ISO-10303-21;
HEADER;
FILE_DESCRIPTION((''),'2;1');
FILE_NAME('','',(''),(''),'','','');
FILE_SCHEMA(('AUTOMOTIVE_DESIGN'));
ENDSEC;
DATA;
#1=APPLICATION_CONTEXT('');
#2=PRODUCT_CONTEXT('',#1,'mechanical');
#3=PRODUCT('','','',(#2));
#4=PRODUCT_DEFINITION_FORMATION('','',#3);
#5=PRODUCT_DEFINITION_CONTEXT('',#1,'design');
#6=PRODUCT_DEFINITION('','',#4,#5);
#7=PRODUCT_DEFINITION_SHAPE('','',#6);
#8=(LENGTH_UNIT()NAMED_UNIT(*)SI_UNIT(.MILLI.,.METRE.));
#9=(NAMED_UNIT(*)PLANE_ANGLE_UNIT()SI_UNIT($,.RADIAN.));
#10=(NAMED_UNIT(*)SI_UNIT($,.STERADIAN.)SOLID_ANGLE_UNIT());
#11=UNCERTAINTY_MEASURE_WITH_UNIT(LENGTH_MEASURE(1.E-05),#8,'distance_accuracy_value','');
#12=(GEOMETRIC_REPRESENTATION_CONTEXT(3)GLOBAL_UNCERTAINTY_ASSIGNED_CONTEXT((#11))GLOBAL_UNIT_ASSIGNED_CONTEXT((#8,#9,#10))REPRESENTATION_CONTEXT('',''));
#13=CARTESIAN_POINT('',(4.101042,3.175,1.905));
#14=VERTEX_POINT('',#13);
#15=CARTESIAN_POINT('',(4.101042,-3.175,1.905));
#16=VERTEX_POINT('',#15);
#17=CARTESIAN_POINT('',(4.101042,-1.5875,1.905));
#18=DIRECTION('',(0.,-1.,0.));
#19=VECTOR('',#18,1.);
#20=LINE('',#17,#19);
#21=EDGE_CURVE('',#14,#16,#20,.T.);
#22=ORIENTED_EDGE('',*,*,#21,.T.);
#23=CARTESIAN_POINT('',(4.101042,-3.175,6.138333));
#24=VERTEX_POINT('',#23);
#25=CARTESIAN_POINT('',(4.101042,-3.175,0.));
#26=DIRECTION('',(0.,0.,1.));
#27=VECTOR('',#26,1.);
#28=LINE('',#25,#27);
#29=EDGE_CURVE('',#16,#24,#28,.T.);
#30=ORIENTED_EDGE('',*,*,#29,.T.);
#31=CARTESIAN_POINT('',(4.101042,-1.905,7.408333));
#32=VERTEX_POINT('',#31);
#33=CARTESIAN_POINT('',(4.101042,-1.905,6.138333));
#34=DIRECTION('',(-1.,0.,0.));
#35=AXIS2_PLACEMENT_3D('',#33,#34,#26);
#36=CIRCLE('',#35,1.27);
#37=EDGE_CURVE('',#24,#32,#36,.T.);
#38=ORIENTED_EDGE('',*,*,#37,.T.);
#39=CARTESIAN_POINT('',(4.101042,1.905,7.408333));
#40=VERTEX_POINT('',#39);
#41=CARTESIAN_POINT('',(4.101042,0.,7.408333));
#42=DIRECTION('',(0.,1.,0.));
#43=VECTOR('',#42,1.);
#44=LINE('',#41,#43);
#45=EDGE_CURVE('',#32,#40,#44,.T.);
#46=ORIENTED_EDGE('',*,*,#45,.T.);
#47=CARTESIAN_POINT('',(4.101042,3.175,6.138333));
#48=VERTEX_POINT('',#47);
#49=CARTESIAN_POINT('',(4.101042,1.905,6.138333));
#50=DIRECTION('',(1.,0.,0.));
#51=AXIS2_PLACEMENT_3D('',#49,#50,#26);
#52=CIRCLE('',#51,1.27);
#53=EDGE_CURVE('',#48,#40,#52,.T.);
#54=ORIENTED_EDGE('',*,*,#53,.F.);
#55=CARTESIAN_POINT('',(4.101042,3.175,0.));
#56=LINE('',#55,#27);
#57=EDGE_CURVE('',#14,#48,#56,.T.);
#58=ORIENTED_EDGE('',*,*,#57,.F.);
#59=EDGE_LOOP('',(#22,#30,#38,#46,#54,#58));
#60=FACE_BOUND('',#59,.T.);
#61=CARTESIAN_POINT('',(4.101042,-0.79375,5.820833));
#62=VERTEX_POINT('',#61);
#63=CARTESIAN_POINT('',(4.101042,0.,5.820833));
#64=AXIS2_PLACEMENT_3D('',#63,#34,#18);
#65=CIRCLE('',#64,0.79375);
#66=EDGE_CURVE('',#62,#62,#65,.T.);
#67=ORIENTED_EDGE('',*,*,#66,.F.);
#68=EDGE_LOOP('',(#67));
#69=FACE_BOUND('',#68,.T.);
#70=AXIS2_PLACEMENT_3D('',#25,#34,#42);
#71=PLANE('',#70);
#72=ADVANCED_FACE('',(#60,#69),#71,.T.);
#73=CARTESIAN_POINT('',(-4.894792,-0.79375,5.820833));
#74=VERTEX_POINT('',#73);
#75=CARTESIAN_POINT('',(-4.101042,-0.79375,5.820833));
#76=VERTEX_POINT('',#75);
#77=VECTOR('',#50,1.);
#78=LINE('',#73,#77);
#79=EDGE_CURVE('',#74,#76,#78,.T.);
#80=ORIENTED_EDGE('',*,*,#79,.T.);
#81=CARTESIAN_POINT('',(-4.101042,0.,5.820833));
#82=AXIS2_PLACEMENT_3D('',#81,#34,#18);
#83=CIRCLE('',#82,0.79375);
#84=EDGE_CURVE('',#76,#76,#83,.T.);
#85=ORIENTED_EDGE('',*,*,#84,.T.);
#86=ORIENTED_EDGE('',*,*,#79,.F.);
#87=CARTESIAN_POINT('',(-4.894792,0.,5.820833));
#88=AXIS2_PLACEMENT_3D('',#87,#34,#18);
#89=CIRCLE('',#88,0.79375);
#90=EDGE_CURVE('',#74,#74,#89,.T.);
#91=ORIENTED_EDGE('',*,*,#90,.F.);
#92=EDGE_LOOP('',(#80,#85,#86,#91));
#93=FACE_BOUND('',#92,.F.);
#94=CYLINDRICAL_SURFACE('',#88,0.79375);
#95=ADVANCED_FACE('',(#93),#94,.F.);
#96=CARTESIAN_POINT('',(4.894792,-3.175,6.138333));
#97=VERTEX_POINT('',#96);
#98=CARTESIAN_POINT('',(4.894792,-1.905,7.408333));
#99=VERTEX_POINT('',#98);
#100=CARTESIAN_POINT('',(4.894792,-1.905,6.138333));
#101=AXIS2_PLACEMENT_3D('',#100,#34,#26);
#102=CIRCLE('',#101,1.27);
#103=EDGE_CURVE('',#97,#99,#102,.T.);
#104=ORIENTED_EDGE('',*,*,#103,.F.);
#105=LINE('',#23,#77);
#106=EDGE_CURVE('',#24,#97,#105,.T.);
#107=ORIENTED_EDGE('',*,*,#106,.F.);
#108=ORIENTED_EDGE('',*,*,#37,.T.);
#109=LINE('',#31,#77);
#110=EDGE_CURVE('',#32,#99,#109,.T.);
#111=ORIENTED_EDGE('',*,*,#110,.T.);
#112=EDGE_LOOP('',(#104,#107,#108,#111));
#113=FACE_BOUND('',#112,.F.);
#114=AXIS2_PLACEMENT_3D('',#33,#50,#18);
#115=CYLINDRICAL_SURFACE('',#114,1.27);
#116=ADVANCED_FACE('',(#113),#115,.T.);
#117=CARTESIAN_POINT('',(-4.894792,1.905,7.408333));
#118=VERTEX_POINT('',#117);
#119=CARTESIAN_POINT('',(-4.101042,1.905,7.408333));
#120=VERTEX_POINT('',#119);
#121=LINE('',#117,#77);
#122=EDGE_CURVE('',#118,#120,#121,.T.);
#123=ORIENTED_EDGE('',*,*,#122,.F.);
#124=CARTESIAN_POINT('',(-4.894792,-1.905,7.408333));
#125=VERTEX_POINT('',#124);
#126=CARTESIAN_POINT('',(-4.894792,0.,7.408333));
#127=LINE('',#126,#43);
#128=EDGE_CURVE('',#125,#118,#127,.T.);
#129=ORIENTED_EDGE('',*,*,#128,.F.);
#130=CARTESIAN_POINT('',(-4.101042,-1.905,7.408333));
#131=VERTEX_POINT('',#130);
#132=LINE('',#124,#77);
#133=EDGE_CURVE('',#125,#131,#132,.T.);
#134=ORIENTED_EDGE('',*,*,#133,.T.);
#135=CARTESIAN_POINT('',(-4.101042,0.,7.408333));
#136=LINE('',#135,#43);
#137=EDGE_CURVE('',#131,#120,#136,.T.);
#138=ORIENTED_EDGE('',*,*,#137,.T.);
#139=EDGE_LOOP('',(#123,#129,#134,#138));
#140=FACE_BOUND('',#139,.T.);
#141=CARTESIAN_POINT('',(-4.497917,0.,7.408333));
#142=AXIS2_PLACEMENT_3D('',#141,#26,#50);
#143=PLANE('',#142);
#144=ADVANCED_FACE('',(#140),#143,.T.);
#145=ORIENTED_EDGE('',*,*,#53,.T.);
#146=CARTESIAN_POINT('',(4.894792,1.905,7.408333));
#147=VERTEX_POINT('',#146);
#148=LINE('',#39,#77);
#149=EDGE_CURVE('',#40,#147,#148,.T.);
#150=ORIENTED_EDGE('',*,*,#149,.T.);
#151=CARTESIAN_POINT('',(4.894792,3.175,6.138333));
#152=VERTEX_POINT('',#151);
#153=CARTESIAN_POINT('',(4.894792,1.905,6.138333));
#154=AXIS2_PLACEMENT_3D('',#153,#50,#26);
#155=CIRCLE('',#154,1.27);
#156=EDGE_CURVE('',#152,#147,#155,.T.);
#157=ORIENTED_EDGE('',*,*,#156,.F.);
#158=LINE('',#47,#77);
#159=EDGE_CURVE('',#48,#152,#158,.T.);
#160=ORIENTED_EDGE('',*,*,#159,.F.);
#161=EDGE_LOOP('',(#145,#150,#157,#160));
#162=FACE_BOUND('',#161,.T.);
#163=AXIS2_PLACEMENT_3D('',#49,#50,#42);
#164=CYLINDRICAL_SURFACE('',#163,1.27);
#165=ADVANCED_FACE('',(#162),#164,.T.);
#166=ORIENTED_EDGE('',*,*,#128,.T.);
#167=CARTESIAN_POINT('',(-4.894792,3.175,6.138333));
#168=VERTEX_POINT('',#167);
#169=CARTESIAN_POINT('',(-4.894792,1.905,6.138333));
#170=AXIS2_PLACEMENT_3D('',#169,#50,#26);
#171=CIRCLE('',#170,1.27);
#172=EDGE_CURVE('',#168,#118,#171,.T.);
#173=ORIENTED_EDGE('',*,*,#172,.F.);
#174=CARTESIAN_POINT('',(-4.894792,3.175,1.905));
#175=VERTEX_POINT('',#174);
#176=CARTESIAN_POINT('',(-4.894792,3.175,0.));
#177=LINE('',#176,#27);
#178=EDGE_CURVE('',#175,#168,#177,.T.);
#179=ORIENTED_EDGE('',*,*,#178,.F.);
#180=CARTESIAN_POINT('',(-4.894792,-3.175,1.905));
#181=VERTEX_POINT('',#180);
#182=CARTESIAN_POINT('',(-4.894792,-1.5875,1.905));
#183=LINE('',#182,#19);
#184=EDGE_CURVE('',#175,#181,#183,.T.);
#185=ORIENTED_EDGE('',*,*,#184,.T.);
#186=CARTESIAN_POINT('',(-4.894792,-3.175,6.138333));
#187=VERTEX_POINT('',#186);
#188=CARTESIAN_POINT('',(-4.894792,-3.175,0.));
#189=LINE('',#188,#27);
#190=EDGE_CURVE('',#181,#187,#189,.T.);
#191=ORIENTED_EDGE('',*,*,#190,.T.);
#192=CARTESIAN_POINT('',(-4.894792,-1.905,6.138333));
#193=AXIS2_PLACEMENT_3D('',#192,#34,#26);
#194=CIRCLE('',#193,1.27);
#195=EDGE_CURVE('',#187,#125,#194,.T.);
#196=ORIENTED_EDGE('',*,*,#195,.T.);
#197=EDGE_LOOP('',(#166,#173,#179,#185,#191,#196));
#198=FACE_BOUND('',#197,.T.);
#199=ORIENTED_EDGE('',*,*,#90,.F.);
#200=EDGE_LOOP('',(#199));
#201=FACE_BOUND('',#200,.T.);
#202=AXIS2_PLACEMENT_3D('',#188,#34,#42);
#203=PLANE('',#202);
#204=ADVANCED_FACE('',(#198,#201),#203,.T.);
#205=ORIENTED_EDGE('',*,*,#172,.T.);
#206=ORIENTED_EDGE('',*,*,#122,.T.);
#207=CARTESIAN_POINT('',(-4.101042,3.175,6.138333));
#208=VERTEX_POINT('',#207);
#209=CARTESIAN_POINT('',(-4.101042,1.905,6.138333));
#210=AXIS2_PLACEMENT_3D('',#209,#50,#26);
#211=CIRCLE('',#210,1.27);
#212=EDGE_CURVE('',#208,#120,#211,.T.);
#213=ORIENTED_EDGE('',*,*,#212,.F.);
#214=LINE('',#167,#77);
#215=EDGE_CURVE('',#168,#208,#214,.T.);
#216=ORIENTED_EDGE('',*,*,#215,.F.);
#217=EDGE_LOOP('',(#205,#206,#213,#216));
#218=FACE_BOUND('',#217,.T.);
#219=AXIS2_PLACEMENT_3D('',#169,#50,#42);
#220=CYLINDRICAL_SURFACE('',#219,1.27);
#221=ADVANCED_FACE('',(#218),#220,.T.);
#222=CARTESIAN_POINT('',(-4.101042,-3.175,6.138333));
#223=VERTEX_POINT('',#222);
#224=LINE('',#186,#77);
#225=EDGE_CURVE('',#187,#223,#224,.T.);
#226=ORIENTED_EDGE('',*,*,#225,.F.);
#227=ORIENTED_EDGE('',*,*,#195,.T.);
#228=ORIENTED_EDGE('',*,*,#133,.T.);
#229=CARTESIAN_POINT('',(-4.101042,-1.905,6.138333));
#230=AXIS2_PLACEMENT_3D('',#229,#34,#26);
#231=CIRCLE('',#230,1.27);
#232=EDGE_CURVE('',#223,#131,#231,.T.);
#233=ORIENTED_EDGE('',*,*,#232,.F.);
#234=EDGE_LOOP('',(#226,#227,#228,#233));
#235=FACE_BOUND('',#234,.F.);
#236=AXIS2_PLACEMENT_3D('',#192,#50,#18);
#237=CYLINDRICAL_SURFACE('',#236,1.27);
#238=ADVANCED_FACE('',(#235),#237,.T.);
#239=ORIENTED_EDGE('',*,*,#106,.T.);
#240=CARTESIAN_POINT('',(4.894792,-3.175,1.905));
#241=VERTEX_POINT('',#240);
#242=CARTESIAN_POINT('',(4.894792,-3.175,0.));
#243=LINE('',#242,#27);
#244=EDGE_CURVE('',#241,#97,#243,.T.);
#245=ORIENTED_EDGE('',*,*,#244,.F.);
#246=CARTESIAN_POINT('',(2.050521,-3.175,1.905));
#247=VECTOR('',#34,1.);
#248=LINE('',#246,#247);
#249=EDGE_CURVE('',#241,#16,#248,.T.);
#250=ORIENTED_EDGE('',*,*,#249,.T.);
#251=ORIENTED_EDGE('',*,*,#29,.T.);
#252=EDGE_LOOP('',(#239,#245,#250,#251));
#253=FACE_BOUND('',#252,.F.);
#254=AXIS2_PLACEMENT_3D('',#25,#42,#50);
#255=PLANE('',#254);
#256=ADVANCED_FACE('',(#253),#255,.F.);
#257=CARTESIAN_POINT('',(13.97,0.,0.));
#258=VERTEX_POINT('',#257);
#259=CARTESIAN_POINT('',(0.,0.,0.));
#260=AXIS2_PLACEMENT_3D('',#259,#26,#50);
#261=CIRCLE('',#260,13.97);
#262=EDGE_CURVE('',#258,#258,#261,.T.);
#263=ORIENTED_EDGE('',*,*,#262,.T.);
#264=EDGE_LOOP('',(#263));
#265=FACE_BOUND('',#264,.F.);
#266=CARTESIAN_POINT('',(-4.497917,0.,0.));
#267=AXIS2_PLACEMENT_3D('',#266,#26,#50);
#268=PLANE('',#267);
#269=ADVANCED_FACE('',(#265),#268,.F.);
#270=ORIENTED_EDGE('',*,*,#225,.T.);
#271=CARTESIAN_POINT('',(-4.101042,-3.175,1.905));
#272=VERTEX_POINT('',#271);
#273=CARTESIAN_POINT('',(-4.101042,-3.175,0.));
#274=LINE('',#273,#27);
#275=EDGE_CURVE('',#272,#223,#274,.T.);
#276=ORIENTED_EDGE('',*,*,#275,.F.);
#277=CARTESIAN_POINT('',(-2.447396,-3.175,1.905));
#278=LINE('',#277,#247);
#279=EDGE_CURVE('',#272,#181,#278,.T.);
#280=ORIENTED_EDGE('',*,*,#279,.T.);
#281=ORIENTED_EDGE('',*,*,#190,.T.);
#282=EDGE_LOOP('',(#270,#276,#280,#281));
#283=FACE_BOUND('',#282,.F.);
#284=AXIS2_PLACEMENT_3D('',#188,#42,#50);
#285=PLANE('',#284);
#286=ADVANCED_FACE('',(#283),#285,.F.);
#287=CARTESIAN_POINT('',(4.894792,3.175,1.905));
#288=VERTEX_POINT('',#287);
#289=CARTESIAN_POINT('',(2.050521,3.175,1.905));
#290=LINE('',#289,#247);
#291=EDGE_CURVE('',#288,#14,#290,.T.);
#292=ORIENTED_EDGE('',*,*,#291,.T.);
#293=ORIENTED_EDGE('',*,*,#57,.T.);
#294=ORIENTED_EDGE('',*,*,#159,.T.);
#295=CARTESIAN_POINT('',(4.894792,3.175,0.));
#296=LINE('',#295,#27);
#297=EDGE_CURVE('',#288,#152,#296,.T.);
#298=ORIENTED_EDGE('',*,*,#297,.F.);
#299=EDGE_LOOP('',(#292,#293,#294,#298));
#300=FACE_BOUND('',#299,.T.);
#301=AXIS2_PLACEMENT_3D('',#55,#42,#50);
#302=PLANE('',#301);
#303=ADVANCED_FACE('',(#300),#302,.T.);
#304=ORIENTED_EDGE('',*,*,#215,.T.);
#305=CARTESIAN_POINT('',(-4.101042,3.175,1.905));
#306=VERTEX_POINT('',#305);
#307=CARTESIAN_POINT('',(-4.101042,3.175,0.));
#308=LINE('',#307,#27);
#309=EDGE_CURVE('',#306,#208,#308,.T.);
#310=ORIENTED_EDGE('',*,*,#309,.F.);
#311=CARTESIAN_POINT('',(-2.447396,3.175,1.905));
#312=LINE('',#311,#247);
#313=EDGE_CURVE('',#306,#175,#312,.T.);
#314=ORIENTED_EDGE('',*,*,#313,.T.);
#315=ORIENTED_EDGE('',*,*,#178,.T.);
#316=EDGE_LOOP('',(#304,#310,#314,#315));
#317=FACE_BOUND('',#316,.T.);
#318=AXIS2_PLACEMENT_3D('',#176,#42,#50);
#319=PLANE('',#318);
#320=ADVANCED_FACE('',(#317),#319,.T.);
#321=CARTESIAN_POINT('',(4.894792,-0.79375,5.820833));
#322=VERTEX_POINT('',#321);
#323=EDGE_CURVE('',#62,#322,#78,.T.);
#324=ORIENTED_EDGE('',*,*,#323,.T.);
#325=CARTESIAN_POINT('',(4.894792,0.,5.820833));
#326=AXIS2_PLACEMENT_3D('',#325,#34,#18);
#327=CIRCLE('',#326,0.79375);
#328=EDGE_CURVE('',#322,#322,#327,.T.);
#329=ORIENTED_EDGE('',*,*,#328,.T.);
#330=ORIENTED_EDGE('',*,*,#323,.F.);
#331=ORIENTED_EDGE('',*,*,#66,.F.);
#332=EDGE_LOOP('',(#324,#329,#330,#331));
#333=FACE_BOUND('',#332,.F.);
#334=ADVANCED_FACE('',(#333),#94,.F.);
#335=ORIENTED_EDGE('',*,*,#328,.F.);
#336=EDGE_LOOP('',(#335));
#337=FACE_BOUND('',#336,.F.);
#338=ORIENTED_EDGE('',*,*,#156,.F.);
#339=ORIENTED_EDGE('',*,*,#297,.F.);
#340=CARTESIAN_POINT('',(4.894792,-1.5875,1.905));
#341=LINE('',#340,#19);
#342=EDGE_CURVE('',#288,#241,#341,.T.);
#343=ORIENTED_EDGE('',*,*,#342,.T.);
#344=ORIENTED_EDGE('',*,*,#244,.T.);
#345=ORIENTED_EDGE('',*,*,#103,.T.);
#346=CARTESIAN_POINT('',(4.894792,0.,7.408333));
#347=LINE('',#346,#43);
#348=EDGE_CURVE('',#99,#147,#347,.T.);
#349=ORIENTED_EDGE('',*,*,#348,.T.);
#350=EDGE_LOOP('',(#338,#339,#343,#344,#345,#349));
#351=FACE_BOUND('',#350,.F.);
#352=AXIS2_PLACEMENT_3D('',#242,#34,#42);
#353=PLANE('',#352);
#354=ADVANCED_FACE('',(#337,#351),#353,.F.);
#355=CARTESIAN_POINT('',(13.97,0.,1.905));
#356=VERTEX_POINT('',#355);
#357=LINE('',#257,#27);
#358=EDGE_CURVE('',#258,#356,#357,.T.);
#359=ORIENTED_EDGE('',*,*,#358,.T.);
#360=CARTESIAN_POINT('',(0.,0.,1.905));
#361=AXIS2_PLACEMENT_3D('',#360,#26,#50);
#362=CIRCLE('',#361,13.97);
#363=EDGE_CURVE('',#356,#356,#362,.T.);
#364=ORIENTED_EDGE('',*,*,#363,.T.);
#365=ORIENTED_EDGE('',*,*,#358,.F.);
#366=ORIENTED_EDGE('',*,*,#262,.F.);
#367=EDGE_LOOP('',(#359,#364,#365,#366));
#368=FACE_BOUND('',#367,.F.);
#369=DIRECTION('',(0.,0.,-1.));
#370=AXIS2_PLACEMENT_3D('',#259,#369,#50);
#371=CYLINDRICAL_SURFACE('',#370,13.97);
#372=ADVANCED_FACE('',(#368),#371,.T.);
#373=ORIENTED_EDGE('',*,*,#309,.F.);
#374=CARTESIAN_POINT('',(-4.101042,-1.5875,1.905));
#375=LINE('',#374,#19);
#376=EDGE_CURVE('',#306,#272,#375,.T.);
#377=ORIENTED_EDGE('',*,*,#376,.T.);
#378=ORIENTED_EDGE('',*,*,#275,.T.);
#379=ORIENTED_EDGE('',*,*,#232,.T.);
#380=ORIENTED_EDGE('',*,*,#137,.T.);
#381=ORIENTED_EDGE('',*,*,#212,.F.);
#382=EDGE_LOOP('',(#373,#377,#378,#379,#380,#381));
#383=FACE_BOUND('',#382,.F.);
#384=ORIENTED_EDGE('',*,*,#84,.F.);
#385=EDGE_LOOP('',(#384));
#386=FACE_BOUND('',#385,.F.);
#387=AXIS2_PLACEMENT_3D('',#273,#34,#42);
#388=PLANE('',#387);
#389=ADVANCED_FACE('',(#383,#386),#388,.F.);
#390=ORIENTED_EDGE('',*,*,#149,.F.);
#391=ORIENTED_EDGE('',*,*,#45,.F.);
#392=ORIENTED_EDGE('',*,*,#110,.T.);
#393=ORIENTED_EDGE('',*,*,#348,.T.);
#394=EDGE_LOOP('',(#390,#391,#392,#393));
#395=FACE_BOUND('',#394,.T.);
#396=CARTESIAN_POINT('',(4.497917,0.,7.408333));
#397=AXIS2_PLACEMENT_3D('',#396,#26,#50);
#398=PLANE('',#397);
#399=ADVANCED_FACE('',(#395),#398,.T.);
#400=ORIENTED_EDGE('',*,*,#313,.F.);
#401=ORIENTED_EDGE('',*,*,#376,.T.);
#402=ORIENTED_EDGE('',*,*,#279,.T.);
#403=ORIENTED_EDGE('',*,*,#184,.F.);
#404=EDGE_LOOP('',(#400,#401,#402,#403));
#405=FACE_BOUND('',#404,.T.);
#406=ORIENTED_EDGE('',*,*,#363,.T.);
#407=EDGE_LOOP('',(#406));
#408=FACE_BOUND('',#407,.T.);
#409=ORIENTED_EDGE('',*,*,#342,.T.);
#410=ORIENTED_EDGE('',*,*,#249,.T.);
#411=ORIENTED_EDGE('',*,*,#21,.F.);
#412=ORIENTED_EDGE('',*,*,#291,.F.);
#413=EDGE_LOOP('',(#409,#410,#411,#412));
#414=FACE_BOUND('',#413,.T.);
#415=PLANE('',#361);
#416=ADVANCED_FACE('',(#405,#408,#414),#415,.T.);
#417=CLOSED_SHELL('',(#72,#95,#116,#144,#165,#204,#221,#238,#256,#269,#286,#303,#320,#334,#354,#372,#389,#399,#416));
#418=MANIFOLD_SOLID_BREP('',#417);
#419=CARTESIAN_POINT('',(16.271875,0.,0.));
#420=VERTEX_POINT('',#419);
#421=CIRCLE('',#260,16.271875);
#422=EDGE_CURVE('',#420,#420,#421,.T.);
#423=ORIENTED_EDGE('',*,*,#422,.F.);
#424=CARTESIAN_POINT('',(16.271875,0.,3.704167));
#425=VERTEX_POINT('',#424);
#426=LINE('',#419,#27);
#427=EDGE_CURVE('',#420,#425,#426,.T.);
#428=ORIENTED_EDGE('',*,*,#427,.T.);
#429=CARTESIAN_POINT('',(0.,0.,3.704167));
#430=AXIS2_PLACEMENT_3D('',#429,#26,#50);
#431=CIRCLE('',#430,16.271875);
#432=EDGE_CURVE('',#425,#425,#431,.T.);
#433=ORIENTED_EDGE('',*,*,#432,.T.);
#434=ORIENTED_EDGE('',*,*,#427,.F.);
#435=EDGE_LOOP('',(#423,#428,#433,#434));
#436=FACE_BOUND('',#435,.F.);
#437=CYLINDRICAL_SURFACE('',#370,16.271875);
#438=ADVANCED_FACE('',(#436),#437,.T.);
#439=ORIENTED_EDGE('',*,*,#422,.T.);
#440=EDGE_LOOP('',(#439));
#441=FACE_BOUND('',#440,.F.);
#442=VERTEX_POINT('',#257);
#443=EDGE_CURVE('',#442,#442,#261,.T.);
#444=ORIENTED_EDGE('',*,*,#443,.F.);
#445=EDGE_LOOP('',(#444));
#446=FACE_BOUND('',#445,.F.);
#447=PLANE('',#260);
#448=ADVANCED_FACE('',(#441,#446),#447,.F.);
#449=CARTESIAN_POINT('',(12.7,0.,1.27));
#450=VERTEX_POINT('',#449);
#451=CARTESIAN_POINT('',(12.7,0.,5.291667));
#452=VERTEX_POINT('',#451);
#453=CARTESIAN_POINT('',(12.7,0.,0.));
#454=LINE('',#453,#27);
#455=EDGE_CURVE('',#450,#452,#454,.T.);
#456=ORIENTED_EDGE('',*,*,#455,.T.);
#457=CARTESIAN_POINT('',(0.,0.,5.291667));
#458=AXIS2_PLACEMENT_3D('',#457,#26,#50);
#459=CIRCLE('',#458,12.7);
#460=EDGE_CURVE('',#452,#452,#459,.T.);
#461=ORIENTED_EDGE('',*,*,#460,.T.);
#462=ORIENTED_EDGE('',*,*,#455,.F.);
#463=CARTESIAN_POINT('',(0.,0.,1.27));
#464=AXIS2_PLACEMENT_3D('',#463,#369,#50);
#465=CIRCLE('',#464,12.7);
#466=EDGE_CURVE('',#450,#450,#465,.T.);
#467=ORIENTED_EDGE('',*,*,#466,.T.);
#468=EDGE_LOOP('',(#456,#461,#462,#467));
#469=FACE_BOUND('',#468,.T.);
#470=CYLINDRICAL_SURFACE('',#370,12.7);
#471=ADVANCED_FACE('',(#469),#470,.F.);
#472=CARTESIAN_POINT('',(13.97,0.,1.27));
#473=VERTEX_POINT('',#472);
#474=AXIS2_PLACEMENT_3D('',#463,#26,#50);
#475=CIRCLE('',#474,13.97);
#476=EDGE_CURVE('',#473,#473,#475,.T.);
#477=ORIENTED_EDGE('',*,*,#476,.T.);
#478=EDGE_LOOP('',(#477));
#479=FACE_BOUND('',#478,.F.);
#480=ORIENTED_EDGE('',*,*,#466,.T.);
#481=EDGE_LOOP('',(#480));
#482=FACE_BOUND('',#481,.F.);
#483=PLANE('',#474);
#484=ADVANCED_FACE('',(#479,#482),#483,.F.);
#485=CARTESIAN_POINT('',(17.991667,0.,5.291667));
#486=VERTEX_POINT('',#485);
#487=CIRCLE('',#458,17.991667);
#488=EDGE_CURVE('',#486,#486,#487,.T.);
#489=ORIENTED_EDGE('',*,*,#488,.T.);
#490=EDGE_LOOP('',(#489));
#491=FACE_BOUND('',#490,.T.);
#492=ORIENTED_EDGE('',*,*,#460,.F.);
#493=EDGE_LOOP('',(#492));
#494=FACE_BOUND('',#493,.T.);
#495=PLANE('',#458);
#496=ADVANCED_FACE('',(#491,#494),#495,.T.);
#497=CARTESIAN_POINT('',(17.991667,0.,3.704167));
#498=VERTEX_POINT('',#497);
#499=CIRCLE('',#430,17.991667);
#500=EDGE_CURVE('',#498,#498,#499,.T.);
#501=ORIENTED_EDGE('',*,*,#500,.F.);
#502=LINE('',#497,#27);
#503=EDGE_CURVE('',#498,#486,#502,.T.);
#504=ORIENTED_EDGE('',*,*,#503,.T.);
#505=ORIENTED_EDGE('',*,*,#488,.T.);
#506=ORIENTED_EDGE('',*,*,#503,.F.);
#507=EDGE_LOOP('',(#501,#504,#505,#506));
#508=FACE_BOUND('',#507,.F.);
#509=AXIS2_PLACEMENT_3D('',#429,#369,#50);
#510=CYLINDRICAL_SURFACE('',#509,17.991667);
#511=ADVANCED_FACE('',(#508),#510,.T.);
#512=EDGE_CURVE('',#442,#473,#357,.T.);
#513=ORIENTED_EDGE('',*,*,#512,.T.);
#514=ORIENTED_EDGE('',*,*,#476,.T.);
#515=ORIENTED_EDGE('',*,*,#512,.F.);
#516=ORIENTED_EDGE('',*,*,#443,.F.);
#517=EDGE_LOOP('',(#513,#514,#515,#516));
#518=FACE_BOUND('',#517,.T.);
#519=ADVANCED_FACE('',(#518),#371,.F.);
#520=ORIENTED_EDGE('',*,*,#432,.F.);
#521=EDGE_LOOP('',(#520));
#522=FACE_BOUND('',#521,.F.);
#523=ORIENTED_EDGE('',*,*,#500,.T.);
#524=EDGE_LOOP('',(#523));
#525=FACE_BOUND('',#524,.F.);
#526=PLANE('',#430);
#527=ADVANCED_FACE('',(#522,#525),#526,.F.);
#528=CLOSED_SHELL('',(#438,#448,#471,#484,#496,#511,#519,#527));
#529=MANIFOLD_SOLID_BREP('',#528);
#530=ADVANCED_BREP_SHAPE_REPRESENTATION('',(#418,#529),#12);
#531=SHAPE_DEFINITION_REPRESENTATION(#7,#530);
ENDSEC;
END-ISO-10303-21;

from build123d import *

# Parameters (mm, degrees)
F0_R      = 16.271875
F0_R_2    = 12.7
F1_DEPTH  = 5.2916666667
F2_START  = 3.7041666667
F0_R_3    = 17.9916666667
F2_DEPTH  = 1.5875
F3_R      = 13.97
F4_DEPTH  = 1.905
F5_DEPTH  = 1.27
F6_W      = 0.79375
F6_H      = 6.35
F7_DEPTH  = 7.4083333333
F8_R      = 1.27
F9_R      = 0.79375
F10_DEPTH = 25.4


with BuildPart() as f1:
    # F0 (on Top) → F1 (new body)
    with BuildSketch(Plane.XY):
        Circle(F0_R)
        Circle(F0_R_2, mode=Mode.SUBTRACT)
    extrude(amount=F1_DEPTH)

    # F0 (on Top) → F2 (join)
    with BuildSketch(Plane.XY.offset(F2_START)):
        Circle(F0_R_3)
        Circle(F0_R, mode=Mode.SUBTRACT)
    extrude(amount=F2_DEPTH)

    # F3 (on Top) → F5 (cut)
    with BuildSketch(Plane.XY):
        Circle(F3_R)
    extrude(amount=F5_DEPTH, mode=Mode.SUBTRACT)


with BuildPart() as f4:
    # F3 (on Top) → F4 (new body)
    with BuildSketch(Plane.XY):
        Circle(F3_R)
    extrude(amount=F4_DEPTH)

    # F6 (on Top) → F7 (join)
    with BuildSketch(Plane.XY):
        with Locations((-4.4979166667, 0)):
            Rectangle(F6_W, F6_H)
        with Locations((4.4979166667, 0)):
            Rectangle(F6_W, F6_H)
    extrude(amount=F7_DEPTH)

    # F8
    f8_edges = [f4.edges().sort_by_distance(p)[0] for p in [
        (-4.497917, -3.175, 7.408333),
        (4.497917, -3.175, 7.408333),
        (4.497917, 3.175, 7.408333),
        (-4.497917, 3.175, 7.408333),
    ]]
    fillet(f8_edges, radius=F8_R)

    # F9 (on face) → F10 (cut)
    with BuildSketch(Plane(origin=(-4.8947916667, 0, 0), x_dir=(0, -1, 0), z_dir=(-1, 0, 0))):
        with Locations((0, 5.8208333333)):
            Circle(F9_R)
    extrude(amount=-F10_DEPTH, mode=Mode.SUBTRACT)


solid = Compound([f1.part, f4.part])
